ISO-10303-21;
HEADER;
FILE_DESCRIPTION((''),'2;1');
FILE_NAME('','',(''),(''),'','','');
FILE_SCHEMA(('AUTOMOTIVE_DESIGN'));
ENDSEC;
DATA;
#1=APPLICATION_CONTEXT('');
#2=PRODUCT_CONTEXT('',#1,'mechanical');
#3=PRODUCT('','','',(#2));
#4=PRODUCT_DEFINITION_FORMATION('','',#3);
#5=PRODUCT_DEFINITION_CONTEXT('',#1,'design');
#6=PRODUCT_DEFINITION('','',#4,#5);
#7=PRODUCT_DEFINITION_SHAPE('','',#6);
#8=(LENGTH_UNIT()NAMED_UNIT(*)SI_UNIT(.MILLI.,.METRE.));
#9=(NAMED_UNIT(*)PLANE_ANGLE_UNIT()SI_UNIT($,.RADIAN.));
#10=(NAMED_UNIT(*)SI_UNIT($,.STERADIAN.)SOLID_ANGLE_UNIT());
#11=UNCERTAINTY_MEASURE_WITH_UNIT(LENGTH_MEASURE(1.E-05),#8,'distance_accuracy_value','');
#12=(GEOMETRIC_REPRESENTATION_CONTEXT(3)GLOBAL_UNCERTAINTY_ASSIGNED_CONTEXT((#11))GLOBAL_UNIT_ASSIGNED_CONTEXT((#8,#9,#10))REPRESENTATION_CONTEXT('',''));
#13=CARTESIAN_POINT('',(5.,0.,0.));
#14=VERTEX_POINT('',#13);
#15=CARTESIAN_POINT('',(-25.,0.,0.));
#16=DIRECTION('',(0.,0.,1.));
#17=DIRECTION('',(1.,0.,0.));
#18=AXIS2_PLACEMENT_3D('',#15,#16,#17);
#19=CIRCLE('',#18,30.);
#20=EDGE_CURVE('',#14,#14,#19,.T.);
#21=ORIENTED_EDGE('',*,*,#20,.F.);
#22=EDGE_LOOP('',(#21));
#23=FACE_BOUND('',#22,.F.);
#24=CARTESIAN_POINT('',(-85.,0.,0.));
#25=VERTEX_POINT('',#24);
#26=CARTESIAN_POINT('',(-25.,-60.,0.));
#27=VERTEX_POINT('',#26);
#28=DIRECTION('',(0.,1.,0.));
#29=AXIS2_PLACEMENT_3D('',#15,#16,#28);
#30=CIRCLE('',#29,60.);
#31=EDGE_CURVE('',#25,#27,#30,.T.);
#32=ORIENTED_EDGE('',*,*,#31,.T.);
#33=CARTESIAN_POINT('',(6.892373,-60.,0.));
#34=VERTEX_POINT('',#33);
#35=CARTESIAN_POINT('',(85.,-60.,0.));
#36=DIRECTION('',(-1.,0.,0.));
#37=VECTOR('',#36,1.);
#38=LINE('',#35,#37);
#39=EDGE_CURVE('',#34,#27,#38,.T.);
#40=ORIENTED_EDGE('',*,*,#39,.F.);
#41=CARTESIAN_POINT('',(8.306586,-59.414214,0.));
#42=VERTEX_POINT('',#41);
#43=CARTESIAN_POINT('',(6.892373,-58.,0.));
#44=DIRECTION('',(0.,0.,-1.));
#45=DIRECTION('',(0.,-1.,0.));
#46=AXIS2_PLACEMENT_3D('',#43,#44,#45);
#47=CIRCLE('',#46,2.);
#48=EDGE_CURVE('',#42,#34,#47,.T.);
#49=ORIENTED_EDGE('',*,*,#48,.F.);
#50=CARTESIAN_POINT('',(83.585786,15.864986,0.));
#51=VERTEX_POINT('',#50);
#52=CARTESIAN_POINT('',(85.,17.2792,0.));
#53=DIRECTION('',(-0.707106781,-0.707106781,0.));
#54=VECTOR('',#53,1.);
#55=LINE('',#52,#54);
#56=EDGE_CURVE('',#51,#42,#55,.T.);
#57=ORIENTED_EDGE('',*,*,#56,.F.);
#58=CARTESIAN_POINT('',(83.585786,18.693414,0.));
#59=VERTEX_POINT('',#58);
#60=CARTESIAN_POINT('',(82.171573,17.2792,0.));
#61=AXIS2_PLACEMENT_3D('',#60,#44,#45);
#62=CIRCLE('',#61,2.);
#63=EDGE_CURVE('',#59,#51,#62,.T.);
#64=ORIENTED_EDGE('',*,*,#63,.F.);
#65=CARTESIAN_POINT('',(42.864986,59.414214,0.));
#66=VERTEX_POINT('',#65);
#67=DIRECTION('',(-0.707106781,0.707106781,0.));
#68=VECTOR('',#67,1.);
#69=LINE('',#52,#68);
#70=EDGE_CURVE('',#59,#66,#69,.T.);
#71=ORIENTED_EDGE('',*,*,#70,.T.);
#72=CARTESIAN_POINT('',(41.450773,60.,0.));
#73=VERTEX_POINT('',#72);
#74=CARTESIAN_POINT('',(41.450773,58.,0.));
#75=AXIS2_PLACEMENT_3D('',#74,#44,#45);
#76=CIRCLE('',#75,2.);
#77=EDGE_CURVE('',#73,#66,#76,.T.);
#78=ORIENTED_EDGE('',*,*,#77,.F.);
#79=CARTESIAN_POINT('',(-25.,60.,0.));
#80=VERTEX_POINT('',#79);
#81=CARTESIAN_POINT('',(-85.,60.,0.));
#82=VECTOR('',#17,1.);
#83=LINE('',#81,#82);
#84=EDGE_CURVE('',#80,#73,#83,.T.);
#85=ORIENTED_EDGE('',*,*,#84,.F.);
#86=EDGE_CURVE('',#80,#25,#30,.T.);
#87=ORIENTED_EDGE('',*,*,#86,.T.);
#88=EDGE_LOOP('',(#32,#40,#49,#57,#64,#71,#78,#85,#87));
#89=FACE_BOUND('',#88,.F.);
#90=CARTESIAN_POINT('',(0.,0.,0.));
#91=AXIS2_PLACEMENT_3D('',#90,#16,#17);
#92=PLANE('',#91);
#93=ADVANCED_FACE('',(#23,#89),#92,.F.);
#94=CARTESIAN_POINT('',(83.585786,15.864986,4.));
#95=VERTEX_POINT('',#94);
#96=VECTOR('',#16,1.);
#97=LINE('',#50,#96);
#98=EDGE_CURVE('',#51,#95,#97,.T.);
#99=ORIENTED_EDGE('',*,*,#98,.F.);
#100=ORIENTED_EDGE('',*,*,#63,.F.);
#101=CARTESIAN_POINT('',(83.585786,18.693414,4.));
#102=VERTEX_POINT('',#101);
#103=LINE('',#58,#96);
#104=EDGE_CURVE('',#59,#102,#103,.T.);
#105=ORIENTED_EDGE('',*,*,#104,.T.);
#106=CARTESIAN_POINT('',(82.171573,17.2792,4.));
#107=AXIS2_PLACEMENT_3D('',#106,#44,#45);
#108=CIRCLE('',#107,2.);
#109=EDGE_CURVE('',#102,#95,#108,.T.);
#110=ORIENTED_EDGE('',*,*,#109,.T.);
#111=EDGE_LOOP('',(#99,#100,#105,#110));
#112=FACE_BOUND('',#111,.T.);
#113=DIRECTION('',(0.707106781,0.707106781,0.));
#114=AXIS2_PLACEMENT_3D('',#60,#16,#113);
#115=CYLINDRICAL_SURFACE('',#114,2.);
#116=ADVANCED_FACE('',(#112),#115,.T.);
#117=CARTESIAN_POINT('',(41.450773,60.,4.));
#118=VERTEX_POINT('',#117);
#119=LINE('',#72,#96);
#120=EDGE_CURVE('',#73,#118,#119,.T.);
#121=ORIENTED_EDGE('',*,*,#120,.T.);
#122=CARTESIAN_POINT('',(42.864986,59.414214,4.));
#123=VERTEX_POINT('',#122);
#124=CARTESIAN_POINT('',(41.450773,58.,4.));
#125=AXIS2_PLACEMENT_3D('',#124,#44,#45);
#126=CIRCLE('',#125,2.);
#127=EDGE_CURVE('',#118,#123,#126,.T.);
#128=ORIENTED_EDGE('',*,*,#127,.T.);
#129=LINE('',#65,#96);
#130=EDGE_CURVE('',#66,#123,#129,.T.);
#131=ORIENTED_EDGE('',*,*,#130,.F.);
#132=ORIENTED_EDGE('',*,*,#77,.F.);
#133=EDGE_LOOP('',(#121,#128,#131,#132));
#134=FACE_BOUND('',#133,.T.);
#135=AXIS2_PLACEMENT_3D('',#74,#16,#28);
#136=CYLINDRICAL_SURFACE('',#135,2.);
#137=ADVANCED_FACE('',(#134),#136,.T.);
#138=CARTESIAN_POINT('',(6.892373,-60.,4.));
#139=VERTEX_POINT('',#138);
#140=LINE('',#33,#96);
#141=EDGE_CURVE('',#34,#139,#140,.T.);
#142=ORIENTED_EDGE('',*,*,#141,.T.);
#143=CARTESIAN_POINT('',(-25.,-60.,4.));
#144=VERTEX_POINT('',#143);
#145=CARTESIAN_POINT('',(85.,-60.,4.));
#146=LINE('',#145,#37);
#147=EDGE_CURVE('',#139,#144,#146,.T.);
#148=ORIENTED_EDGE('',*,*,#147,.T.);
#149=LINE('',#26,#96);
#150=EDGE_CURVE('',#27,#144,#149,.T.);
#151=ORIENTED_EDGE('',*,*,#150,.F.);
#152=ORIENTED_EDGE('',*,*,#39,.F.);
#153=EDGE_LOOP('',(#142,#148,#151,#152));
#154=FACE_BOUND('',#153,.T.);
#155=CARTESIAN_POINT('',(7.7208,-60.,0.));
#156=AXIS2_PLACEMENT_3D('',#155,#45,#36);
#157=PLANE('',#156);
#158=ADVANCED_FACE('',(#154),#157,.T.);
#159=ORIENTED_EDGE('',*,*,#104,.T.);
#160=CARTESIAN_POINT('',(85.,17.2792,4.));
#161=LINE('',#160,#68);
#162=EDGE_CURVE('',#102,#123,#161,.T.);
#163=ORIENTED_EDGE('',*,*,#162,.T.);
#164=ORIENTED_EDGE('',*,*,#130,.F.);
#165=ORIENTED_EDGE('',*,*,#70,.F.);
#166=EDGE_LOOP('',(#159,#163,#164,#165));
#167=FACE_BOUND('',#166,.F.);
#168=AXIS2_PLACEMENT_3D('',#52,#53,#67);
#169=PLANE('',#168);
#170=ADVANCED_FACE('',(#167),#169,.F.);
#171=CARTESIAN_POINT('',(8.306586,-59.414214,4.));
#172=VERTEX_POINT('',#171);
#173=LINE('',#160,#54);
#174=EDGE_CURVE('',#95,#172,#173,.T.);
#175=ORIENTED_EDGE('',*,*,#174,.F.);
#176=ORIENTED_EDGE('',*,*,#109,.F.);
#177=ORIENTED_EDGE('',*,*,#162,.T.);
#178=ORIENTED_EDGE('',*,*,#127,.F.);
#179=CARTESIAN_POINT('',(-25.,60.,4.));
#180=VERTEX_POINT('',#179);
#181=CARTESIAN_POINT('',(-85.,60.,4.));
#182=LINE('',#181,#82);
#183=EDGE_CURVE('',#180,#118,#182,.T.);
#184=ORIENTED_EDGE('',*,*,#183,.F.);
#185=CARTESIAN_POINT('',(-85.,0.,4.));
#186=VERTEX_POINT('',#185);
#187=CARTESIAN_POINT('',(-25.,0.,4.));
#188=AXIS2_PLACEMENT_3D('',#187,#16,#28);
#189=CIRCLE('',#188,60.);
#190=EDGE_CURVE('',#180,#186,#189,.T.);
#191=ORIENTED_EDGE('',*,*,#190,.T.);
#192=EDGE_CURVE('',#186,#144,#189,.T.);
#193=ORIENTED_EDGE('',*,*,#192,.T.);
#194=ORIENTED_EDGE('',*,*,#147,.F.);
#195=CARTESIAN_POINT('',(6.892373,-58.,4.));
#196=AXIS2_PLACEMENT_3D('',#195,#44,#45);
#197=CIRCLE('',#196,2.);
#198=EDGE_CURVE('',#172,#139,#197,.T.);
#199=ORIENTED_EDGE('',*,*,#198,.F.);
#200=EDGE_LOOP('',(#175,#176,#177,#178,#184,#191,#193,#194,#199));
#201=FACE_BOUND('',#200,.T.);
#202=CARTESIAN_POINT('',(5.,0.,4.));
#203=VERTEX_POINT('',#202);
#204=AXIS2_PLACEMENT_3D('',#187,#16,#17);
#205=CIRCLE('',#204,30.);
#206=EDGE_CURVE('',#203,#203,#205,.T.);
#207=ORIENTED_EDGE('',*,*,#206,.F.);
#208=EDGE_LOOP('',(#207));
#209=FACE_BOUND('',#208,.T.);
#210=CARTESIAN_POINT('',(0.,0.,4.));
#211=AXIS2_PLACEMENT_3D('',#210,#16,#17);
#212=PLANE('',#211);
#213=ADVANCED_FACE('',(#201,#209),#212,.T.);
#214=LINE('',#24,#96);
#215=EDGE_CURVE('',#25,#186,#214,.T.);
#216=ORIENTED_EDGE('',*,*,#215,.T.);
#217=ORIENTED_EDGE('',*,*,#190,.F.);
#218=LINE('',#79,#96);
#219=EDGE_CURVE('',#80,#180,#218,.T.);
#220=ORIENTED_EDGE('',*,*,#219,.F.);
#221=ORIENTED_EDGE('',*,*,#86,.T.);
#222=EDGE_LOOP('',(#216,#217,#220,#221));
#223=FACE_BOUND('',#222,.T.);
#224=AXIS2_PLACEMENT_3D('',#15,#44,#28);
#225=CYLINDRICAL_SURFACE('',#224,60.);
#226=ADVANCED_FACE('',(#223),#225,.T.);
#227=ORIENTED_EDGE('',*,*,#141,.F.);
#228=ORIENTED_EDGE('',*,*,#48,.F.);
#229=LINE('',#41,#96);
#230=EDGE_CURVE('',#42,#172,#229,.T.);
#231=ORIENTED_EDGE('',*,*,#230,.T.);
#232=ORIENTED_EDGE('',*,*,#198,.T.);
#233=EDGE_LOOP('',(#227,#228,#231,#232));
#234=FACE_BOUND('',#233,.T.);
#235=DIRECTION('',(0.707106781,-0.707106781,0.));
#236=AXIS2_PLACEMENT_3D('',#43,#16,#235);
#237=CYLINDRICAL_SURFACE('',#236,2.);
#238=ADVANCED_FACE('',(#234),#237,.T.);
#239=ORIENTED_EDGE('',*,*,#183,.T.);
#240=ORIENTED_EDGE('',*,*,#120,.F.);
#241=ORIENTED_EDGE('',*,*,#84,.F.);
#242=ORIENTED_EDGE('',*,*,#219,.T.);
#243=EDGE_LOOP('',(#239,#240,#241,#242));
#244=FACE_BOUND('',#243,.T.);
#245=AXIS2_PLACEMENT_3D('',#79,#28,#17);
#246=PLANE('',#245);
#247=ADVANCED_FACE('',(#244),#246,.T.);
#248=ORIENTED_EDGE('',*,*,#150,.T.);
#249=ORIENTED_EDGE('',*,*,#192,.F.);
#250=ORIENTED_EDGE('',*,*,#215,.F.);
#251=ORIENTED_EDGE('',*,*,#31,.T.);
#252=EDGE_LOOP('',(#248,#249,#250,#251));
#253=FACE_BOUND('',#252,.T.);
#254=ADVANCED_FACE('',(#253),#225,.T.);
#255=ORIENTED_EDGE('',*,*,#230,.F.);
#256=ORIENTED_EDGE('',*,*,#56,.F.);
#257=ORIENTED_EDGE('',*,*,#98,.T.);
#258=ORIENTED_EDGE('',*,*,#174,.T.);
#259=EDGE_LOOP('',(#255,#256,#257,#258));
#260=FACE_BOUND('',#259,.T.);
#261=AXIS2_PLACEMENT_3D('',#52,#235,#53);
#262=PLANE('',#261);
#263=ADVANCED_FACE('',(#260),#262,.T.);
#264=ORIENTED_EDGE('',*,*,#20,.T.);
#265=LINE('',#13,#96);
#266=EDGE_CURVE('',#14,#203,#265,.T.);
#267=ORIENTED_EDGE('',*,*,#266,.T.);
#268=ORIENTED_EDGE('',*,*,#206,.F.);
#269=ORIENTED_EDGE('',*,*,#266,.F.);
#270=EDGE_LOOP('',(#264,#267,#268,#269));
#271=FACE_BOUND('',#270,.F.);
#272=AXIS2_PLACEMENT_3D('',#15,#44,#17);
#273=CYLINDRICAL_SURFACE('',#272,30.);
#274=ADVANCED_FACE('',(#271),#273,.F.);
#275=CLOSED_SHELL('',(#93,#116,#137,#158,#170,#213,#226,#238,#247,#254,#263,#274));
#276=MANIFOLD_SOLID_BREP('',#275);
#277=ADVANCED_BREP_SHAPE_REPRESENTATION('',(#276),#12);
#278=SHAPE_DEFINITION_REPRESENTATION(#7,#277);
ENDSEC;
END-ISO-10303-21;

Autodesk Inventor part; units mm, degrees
ref_plane "YZ Plane" through (0, 0, 0) normal (1, 0, 0) x (0, 1, 0)
ref_plane "XZ Plane" through (0, 0, 0) normal (0, 1, 0) x (-1, 0, 0)
ref_plane "XY Plane" through (0, 0, 0) normal (0, 0, 1) x (1, 0, 0)
sketch "Sketch1" plane through (0, 0, 0) normal (0, 0, 1) x (1, 0, 0)
  line L0 (-85, 60) -> (85, 60)
  line L1 (85, 60) -> (85, -60)
  line L2 (85, -60) -> (-85, -60)
  line L3 (-85, -60) -> (-85, 60)
  line L4 (-85, 60) -> (85, -60) construction
  line L5 (85, 60) -> (-85, -60) construction
  circle A0 centre (-25, 0) radius 30
  line L6 (0, 60) -> (0, -60) construction
  arc A1 (-25, 60) -> (-25, -60) centre (-25, 0) ccw
  line L7 (85, 17.2792) -> (7.7208, -60)
  line L8 (85, 17.2792) -> (42.2792, 60)
  point P0 (0, 0)
  point P1 (-85, 0)
  dimension "d0" = 170
  dimension "d1" = 120
  dimension "d13" = 60
  dimension "d14" = 60
  dimension "d17" = 45
  dimension "d18" = 90
extrude "Plate1" add sketch "Sketch1" along normal blind 4 contours L0 L8 L7 L2 A1
fillet "Corner Round1" radius 2 3 edges at (85, 17.2792, 2) (42.2792, 60, 2) (7.7208, -60, 2)
equation "\"d2\" = Thickness"
equation "\"BendRadius\" = Thickness"
equation "\"BendReliefWidth\" = Thickness"
equation "\"BendReliefDepth\" = 0.5 * Thickness"
equation "\"CornerReliefSize\" = 4 * Thickness"
equation "\"MinimumRemnant\" = 2 * Thickness"
equation "\"TransitionRadius\" = BendRadius"
equation "\"JacobiRadiusSize\" = BendRadius"
equation "\"GapSize\" = Thickness"
equation "\"Thickness\" = 4"
properties part number "ухо"
